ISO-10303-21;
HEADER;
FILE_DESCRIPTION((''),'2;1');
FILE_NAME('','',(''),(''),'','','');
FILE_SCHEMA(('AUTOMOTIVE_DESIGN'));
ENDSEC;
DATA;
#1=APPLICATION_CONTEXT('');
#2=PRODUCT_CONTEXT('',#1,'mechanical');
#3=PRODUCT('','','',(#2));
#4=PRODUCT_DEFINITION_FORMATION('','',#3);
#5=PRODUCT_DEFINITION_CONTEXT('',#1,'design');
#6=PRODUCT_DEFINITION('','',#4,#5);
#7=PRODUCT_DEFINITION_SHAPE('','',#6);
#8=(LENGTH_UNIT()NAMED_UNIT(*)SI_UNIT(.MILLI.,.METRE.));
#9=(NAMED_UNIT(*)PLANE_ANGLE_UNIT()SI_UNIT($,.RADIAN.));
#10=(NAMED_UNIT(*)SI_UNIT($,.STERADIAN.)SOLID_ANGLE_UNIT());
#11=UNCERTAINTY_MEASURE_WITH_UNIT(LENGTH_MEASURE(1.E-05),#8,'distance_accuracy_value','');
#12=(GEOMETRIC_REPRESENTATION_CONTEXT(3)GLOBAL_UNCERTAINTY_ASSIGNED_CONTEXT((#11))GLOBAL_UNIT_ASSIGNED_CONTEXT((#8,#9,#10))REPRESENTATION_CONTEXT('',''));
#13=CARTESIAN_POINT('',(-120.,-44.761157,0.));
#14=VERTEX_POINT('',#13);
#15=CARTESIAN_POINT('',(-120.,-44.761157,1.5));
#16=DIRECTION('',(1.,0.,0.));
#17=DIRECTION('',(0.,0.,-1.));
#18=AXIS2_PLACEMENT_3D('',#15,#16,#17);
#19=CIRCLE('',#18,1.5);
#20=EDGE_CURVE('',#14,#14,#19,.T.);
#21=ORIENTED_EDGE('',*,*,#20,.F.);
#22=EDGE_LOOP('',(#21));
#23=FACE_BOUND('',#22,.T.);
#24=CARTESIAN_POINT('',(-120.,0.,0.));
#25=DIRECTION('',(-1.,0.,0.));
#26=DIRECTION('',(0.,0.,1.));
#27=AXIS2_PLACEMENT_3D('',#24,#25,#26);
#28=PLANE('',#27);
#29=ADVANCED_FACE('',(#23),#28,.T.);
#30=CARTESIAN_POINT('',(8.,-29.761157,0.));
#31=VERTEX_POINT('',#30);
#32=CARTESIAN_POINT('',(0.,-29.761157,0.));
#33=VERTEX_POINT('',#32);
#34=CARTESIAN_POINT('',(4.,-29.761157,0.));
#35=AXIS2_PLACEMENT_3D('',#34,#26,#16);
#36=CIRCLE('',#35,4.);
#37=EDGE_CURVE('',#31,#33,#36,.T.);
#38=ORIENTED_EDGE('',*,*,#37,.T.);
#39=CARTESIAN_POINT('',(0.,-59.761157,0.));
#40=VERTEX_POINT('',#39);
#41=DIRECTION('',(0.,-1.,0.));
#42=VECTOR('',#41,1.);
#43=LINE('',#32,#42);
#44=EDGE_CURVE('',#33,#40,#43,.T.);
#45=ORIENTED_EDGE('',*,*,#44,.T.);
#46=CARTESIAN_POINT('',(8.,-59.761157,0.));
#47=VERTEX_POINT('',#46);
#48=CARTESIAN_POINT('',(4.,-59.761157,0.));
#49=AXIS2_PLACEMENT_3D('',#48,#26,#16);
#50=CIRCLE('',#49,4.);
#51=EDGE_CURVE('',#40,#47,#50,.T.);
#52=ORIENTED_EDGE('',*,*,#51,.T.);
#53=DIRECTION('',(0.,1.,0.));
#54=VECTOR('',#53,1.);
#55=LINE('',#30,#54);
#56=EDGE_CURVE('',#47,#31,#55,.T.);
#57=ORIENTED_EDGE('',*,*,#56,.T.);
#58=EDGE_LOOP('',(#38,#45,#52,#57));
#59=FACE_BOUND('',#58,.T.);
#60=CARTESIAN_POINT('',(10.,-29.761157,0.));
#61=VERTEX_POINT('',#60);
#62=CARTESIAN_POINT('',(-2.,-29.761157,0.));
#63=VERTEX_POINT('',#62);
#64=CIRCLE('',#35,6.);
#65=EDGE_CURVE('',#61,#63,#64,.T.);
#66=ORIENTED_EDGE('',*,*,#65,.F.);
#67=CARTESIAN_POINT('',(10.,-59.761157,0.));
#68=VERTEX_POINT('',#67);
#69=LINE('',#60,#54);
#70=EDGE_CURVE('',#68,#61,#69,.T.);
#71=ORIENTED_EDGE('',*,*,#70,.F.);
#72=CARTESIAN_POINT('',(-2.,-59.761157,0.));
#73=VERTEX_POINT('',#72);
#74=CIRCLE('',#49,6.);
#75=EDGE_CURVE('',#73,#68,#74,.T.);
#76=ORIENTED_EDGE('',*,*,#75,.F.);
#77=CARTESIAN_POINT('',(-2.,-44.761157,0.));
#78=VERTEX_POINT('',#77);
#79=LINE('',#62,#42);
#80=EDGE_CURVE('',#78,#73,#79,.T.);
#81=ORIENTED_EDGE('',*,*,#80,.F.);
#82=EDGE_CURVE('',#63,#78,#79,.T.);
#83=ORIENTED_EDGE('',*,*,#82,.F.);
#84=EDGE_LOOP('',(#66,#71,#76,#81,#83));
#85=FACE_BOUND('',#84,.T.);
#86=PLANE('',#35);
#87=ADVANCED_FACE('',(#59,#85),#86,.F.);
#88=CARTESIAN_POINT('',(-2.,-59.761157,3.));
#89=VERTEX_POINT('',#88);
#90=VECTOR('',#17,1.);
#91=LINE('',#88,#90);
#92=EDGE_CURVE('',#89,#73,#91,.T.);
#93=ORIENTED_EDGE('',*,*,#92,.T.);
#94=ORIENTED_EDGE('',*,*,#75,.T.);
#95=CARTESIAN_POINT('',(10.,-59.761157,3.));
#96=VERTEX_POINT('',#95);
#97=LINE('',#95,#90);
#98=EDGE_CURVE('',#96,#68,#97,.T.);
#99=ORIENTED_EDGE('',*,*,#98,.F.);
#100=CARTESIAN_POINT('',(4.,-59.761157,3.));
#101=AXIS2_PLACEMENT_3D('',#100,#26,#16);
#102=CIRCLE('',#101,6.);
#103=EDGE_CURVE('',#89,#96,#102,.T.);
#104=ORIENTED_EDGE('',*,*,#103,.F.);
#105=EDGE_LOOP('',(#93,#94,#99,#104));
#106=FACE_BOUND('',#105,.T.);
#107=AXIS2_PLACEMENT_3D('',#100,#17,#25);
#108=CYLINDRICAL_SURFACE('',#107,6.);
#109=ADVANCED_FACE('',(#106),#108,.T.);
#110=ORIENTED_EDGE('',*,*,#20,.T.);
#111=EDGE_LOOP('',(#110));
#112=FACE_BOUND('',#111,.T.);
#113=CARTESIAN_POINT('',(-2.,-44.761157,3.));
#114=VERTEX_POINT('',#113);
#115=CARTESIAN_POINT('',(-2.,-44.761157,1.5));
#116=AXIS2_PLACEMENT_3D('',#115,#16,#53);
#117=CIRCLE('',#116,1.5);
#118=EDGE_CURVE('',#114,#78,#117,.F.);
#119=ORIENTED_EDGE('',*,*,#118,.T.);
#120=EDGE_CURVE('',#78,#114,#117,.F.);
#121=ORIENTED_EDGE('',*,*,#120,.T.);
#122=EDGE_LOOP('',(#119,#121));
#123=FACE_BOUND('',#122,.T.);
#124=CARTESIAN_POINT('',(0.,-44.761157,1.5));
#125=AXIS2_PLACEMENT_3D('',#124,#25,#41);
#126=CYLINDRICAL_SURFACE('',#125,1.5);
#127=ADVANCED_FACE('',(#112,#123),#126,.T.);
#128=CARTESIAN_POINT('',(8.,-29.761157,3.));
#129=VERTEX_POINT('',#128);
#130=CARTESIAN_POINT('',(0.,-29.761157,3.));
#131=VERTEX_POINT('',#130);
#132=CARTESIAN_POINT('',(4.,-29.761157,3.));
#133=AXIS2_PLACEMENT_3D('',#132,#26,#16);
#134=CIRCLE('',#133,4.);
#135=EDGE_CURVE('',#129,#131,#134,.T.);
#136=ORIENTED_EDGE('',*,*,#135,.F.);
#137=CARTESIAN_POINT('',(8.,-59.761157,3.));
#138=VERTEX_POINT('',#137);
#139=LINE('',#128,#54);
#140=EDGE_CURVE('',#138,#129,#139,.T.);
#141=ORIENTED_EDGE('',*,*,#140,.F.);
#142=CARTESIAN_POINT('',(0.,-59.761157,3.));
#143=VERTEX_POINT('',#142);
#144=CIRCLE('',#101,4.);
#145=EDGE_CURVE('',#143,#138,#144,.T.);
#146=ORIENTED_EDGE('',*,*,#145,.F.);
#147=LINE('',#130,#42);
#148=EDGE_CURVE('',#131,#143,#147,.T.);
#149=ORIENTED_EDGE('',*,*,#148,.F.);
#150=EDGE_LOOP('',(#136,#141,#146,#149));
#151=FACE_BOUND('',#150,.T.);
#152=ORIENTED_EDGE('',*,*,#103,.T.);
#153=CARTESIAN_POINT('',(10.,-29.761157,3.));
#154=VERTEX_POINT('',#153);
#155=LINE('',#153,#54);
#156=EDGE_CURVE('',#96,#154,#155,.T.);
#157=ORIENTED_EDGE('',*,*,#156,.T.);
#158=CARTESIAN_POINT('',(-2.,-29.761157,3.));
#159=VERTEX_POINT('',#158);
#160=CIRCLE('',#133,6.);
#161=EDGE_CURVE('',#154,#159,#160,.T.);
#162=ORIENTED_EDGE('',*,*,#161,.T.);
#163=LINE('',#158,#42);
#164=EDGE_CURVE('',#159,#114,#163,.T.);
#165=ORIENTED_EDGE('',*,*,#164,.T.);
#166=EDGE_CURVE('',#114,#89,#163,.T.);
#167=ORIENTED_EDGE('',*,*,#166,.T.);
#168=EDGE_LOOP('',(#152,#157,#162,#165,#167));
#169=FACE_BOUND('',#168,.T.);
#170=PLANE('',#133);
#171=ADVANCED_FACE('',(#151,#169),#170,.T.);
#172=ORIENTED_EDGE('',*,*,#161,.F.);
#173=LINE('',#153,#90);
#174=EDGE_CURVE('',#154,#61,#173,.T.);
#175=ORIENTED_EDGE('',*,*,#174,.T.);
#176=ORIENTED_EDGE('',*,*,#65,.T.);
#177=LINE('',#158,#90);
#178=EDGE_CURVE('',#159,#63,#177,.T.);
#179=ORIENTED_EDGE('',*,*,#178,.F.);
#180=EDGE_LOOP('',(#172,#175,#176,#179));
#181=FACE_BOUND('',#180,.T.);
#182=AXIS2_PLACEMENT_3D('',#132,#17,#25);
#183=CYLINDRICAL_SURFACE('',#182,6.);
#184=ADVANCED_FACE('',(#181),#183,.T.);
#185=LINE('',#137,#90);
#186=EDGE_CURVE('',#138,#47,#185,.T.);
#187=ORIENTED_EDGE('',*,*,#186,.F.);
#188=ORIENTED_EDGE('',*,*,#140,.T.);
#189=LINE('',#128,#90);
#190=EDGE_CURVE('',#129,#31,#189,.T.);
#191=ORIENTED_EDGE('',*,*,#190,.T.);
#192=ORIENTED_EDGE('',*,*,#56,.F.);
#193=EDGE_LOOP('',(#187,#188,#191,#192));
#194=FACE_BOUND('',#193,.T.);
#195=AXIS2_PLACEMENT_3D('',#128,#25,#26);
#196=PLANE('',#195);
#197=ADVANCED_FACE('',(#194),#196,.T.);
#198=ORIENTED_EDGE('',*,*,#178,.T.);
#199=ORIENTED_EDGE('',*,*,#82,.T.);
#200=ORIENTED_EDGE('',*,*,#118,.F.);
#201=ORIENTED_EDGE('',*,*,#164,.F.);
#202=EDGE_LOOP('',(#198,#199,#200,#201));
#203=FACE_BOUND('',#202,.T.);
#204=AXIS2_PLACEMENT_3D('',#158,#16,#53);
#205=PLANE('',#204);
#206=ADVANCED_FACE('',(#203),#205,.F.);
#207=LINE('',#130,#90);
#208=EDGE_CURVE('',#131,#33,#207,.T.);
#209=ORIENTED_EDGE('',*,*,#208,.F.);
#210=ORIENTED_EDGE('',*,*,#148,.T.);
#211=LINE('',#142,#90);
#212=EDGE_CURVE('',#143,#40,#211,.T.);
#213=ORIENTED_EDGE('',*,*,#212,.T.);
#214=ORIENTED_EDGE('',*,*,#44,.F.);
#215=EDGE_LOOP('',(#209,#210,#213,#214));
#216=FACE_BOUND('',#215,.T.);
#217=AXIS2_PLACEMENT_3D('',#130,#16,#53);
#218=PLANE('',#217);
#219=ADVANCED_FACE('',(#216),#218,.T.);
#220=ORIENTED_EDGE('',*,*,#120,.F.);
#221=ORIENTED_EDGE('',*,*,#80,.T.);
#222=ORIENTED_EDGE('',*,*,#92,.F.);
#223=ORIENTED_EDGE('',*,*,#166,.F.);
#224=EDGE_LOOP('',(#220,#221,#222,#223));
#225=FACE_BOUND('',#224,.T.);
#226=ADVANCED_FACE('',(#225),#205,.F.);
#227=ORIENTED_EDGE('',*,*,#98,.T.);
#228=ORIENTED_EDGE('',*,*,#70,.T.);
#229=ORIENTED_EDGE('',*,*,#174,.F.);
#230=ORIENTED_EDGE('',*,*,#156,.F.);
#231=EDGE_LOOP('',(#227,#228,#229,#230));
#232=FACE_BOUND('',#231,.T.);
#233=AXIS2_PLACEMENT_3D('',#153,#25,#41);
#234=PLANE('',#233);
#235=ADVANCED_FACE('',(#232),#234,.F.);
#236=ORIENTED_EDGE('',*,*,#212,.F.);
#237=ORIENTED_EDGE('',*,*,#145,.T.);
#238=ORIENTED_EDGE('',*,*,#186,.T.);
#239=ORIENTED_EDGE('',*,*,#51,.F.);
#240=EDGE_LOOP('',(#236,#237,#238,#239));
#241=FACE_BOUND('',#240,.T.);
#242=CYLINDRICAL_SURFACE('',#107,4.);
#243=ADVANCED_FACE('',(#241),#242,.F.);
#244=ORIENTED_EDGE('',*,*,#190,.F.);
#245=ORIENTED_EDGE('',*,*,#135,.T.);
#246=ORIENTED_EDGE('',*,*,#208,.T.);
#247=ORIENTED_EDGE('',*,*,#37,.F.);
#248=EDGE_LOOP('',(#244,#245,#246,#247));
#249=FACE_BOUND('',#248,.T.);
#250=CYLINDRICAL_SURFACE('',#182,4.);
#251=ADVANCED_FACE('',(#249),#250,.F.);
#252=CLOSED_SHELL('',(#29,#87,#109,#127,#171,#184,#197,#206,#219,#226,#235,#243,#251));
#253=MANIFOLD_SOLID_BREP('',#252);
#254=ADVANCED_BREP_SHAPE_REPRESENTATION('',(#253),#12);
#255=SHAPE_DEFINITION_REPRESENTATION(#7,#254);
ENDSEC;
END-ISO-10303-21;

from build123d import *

# Parameters (mm, degrees)
EXTRUDE_1_DEPTH     = 3
EXTRUDE_START       = -120
EXTRUDE_2_OUTLINE_R = 1.5
EXTRUDE_2_DEPTH     = 118


# Read off the part's stored shape, not the designer's step: 凸台-拉伸2
with BuildPart() as part:
    # 草图1 → 凸台-拉伸1 (new body)
    with BuildSketch(Plane.XY):
        with BuildLine():
            Line((10, -29.761156884), (10, -59.761156884))
            ThreePointArc((10, -59.761156884), (4, -65.761156884), (-2, -59.761156884))
            Line((-2, -59.761156884), (-2, -29.761156884))
            ThreePointArc((-2, -29.761156884), (4, -23.761156884), (10, -29.761156884))
        make_face()
        with BuildLine():
            Line((0, -29.761156884), (0, -59.761156884))
            ThreePointArc((0, -59.761156884), (4, -63.761156884), (8, -59.761156884))
            Line((8, -59.761156884), (8, -29.761156884))
            ThreePointArc((8, -29.761156884), (4, -25.761156884), (0, -29.761156884))
        make_face(mode=Mode.SUBTRACT)
    extrude(amount=EXTRUDE_1_DEPTH)

    # 凸台-拉伸2 outline → 凸台-拉伸2 (add)
    with BuildSketch(Plane.YZ.offset(EXTRUDE_START)):
        with Locations((-44.761156884, 1.5)):
            Circle(EXTRUDE_2_OUTLINE_R)
    extrude(amount=EXTRUDE_2_DEPTH)


solid = part.part
